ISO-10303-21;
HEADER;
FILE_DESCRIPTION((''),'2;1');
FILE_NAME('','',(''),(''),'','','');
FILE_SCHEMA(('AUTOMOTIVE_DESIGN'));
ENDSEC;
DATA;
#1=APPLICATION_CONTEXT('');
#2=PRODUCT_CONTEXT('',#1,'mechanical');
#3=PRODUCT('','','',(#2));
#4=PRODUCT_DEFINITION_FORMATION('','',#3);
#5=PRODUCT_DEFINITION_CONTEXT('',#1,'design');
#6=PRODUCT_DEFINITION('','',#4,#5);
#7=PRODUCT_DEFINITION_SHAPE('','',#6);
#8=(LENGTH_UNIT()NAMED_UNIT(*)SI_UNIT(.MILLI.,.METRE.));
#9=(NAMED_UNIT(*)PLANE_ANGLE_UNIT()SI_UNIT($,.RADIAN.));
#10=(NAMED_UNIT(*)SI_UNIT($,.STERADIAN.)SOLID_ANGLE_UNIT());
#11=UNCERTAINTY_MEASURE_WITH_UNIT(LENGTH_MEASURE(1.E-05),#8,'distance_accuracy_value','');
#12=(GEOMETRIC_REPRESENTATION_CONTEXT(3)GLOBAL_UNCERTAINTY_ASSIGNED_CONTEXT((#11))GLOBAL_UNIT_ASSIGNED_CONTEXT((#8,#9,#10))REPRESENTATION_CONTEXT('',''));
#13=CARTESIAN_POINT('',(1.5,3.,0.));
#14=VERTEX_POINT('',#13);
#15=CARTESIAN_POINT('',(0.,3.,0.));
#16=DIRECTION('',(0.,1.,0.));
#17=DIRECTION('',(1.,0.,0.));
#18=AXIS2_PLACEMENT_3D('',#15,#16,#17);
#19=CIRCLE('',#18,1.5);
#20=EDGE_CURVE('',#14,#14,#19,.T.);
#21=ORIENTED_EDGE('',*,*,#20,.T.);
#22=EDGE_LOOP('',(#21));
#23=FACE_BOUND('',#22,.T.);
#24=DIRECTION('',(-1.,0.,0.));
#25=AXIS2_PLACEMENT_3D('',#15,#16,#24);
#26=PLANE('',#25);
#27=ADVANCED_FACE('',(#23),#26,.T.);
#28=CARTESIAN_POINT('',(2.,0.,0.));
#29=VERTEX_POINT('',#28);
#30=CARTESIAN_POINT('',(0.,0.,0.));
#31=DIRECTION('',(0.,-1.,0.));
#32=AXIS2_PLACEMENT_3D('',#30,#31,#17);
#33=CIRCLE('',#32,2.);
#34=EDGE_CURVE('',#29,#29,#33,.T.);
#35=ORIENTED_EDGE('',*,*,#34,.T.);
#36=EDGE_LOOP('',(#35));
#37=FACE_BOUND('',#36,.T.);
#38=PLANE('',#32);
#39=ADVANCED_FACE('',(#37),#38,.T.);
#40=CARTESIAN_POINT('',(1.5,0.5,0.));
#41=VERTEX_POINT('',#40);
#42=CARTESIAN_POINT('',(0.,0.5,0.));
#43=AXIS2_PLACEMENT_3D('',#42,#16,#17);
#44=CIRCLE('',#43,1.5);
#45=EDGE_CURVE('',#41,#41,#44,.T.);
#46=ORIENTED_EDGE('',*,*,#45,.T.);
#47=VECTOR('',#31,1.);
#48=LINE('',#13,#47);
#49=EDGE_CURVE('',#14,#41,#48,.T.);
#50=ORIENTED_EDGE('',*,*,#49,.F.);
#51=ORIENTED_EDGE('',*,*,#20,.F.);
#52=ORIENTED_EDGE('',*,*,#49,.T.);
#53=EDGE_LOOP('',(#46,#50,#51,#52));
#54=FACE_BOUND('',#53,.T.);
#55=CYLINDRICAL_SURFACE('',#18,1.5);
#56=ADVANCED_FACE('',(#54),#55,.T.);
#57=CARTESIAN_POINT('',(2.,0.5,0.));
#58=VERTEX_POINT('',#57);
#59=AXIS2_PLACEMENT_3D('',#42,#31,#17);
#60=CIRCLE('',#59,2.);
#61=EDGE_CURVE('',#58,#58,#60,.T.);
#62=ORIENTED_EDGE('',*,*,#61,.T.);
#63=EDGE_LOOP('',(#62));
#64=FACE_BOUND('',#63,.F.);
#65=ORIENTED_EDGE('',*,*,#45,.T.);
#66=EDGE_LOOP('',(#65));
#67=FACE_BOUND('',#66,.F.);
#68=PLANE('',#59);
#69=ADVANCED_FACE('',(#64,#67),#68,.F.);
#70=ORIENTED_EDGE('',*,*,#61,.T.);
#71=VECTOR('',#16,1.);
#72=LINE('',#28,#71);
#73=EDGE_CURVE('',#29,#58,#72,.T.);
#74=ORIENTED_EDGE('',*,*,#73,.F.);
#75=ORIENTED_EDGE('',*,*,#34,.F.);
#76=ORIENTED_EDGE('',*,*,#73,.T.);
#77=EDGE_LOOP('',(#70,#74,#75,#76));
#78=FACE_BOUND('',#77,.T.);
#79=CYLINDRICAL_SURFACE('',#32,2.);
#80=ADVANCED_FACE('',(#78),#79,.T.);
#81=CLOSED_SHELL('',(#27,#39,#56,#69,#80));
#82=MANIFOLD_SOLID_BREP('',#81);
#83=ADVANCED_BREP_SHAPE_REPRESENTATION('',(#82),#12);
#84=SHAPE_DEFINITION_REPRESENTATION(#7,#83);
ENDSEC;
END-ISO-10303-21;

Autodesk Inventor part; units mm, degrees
ref_plane "YZ Plane" through (0, 0, 0) normal (1, 0, 0) x (0, 1, 0)
ref_plane "XZ Plane" through (0, 0, 0) normal (0, 1, 0) x (-1, 0, 0)
ref_plane "XY Plane" through (0, 0, 0) normal (0, 0, 1) x (1, 0, 0)
sketch "Sketch1" plane through (0, 0, 0) normal (0, 1, 0) x (-1, 0, 0)
  circle A0 centre (0, 0) radius 1.625
  dimension "d0" = 3.25
extrude "Extrusion1" add sketch "Sketch1" along normal blind 3
sketch "Sketch3" plane through (0, 0, 0) normal (0, -1, 0) x (1, 0, 0)
  circle A0 centre (0, 0) radius 1.75
  dimension "d6" = 3.5
loft "Loft1" add profiles "Sketch3" section 2 edges at (1.625, 3, 0)
sketch "Sketch5" plane through (0, 0, 0) normal (0, -1, 0) x (1, 0, 0)
  circle A0 centre (0, 0) radius 2
  dimension "d14" = 4
extrude "Extrusion4" add sketch "Sketch5" against normal blind 0.5
sketch "Sketch6" plane through (0, 3, 0) normal (0, 1, 0) x (1, 0, 0)
  circle A0 centre (0, 0) radius 1.5
  circle A1 centre (0, 0) radius 1.75
  dimension "d17" = 3
  dimension "d18" = 3.5
extrude "Extrusion5" cut sketch "Sketch6" against normal blind 2.5
properties part number "EndCap_bot"
